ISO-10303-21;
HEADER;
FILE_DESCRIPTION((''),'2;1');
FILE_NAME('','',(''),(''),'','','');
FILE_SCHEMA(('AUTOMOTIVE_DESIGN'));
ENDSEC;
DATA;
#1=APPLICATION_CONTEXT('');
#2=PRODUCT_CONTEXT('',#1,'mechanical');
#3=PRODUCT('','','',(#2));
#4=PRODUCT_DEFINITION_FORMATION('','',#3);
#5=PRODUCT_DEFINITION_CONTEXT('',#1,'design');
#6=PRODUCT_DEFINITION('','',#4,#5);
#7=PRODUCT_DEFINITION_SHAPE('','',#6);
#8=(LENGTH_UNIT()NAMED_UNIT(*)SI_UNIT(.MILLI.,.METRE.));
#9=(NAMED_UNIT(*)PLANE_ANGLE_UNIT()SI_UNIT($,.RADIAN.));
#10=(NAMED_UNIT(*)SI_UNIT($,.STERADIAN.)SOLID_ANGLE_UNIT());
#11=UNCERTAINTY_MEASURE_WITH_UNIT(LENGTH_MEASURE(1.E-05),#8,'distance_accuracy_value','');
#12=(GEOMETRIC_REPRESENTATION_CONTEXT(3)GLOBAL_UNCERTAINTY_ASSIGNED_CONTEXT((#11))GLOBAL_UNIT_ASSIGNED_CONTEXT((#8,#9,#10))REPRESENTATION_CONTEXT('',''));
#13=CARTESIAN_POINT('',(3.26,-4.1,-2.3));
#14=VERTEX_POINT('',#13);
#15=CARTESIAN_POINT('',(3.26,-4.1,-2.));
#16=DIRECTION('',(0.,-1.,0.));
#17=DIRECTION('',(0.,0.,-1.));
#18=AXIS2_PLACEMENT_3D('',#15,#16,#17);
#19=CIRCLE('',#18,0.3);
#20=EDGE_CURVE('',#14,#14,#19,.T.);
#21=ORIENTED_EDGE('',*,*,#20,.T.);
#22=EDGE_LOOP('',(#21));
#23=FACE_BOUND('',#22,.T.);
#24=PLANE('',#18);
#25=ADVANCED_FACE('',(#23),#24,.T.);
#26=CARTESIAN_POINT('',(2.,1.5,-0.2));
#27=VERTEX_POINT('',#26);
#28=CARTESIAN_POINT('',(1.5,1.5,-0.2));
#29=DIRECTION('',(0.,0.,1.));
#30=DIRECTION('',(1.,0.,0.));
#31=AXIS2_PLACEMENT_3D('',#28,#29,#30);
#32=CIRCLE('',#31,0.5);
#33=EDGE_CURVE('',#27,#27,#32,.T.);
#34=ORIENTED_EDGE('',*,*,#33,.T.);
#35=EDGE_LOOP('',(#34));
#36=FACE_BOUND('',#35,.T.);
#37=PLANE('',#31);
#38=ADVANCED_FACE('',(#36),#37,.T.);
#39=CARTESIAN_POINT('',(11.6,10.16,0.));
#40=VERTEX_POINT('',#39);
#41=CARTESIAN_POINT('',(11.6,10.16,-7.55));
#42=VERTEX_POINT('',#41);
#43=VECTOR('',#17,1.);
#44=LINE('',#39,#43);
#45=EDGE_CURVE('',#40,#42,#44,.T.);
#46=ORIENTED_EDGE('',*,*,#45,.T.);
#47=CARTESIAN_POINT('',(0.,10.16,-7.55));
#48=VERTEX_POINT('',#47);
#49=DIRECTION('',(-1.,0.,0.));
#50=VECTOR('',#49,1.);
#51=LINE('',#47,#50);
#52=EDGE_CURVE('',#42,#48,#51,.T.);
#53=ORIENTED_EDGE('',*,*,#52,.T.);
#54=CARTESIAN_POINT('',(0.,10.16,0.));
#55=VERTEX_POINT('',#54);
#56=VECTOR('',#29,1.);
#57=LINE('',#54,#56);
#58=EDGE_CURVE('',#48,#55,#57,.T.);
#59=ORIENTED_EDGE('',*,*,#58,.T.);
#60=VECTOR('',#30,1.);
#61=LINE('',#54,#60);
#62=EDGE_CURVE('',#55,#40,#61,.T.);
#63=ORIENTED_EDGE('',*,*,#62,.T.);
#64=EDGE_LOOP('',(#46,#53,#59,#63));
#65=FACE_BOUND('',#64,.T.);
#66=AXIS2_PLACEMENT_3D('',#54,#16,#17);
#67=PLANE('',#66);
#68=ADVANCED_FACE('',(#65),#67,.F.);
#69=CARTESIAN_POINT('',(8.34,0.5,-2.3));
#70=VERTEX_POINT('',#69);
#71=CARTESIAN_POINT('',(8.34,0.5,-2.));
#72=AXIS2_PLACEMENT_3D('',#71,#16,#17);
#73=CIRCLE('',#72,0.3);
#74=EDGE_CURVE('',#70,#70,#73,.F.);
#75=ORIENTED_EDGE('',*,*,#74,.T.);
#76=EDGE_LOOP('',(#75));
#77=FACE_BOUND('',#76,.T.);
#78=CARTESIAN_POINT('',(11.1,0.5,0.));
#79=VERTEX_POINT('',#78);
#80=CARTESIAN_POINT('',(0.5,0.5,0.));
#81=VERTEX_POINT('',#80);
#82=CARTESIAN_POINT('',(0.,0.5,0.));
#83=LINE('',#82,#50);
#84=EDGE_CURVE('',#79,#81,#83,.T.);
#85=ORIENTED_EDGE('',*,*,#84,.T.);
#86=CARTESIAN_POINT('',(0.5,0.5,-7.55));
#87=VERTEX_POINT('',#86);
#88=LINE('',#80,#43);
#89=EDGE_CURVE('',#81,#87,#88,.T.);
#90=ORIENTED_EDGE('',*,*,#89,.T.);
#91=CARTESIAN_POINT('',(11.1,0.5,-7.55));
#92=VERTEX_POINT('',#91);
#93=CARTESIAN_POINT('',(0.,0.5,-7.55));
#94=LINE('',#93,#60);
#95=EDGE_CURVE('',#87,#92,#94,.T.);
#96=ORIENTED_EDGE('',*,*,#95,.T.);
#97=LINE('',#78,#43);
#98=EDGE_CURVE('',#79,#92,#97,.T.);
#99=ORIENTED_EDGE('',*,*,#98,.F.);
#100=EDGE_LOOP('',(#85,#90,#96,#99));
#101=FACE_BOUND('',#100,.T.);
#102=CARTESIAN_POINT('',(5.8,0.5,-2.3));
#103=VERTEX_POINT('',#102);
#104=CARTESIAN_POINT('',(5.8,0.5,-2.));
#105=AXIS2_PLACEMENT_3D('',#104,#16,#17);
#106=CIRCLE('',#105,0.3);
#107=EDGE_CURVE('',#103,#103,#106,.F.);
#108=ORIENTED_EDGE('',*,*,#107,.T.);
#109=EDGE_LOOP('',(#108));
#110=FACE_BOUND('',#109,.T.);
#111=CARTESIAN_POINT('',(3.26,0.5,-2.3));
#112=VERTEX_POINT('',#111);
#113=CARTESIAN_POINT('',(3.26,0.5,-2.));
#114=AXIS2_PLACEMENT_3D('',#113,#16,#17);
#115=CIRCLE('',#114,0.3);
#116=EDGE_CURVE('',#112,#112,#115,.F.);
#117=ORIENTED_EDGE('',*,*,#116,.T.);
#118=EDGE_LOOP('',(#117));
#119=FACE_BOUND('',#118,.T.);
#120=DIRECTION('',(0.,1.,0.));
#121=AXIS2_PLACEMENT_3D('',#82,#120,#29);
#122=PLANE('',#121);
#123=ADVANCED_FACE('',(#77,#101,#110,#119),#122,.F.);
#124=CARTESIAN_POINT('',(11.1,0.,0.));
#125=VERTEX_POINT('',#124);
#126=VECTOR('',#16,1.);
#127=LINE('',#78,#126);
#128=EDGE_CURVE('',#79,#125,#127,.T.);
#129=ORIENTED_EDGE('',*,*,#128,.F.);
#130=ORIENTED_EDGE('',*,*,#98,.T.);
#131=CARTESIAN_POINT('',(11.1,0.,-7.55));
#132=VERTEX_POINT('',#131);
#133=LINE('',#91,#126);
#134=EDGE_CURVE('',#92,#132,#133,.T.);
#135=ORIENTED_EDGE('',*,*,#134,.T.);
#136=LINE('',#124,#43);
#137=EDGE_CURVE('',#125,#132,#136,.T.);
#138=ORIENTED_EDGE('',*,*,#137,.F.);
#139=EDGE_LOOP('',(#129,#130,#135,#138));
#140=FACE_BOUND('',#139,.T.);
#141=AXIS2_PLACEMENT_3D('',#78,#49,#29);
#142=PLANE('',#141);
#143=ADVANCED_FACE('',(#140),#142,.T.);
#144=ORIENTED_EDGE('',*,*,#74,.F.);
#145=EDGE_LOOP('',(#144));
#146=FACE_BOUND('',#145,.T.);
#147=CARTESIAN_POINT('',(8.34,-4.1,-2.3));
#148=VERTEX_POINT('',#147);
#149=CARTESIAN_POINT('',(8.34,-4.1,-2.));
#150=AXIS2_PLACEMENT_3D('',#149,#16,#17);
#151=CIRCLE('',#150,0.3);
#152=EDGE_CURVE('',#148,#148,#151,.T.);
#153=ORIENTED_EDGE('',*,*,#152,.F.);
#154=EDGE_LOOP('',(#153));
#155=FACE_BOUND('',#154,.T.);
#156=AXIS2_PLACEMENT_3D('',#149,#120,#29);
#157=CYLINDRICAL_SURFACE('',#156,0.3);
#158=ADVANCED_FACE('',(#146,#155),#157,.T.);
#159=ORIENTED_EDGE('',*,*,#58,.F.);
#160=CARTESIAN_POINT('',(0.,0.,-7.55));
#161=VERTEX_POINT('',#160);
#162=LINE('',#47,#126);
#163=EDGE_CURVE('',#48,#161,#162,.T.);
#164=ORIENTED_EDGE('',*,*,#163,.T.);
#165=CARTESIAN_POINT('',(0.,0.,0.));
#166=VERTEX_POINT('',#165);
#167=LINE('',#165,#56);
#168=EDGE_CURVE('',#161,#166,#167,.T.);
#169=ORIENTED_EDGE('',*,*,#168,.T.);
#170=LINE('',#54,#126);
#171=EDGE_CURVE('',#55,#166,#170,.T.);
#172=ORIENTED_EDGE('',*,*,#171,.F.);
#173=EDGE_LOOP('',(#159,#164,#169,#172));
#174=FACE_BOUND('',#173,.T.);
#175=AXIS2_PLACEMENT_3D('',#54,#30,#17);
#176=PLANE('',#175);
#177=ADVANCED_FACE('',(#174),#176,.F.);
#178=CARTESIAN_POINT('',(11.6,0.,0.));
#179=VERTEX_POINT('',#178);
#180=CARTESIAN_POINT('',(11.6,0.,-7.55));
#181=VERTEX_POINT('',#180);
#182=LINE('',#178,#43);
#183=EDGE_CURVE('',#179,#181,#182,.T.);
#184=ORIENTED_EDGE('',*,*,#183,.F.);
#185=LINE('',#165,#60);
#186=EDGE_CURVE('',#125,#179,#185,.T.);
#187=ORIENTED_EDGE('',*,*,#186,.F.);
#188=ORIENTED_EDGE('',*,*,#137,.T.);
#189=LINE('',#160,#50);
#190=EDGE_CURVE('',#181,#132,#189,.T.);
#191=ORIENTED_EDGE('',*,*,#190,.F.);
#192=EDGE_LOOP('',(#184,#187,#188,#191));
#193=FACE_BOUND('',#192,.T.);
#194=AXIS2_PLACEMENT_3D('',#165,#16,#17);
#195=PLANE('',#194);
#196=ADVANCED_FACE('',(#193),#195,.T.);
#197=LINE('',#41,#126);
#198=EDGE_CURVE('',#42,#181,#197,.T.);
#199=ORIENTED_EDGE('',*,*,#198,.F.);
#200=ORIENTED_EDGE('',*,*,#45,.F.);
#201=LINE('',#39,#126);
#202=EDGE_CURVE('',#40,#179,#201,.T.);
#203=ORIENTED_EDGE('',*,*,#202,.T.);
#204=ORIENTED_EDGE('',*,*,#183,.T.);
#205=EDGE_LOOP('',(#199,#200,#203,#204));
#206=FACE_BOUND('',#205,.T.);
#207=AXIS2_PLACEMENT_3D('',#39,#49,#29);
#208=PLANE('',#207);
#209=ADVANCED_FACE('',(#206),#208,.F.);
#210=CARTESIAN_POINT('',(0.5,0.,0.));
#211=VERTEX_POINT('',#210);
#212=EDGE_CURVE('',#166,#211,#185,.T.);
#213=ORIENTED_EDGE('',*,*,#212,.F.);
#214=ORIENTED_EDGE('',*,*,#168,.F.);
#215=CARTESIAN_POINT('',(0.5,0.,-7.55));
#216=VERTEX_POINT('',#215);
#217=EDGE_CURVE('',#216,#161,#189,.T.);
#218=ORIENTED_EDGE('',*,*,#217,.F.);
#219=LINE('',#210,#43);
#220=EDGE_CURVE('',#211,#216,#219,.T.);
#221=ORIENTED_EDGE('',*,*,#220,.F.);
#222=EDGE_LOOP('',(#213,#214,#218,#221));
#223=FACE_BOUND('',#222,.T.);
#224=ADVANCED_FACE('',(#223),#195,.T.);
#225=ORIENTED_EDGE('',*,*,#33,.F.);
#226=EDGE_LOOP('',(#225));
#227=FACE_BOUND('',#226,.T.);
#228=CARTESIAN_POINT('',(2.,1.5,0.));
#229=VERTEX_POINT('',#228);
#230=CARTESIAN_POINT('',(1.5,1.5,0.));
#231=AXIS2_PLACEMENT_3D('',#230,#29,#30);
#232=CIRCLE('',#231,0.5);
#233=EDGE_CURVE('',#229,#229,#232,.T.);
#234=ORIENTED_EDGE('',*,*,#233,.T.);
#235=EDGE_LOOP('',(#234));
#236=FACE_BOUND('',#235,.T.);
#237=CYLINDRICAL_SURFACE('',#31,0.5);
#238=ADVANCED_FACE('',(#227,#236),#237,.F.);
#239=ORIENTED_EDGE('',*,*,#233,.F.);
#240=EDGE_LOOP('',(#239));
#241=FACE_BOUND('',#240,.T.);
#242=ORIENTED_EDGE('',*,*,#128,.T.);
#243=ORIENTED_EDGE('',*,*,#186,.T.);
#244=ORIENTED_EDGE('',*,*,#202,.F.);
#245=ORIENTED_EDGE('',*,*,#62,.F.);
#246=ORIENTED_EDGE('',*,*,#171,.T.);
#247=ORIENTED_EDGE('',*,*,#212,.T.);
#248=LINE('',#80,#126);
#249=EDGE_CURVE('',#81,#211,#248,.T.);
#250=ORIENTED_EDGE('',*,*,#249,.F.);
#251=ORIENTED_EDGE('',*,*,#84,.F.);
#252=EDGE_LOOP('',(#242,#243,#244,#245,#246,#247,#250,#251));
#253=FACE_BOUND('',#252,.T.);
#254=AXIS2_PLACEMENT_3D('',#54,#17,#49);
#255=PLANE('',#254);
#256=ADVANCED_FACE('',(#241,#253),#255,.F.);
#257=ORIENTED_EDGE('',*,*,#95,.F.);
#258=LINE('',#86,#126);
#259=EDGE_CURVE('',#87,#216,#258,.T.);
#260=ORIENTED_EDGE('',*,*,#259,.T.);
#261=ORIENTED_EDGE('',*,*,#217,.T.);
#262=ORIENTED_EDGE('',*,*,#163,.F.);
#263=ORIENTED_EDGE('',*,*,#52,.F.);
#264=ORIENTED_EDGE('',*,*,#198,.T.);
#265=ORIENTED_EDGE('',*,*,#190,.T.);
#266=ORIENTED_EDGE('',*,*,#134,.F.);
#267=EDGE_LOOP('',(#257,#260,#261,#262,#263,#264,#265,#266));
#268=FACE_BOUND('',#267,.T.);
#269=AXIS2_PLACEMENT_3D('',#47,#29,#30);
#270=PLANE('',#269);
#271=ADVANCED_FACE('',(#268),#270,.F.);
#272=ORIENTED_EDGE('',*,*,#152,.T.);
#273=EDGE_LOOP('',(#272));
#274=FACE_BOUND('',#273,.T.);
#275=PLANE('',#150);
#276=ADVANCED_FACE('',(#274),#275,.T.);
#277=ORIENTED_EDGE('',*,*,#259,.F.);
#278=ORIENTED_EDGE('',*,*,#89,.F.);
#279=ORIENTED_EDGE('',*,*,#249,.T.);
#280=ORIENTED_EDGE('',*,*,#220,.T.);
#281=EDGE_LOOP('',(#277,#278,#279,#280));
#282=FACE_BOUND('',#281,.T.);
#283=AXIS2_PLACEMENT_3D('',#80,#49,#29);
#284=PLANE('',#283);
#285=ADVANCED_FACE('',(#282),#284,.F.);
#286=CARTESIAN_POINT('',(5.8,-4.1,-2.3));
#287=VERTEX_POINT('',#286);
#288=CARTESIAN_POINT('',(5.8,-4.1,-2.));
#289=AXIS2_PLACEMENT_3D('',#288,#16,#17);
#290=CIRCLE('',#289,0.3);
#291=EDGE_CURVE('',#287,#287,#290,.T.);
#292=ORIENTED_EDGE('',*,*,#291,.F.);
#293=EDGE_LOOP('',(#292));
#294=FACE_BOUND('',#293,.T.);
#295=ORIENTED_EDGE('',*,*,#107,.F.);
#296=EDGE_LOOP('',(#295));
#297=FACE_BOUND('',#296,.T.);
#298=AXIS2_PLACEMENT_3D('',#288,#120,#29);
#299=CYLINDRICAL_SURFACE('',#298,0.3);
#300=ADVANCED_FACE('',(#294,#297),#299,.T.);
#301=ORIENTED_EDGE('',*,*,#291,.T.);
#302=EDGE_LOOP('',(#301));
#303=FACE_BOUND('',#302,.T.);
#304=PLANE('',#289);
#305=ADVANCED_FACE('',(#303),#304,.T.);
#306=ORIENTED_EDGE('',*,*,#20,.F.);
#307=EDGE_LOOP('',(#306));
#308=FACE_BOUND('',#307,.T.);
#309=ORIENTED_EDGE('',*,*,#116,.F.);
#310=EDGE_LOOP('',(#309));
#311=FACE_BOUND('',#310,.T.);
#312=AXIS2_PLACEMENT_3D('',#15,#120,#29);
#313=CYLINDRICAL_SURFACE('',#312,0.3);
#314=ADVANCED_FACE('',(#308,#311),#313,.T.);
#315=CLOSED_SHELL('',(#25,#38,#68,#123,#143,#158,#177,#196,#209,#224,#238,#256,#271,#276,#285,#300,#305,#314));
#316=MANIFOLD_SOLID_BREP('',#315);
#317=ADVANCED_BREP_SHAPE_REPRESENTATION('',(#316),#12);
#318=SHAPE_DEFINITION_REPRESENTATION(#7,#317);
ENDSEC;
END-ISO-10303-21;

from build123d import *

# Parameters (mm, degrees)
SKETCH1_W                   = 11.6
SKETCH1_H                   = 7.55
BOSS_EXTRUDE1_DEPTH         = 10.16
SKETCH2_R                   = 0.5
CUT_EXTRUDE1_DEPTH          = 0.2
SKETCH3_R                   = 0.3
BOSS_EXTRUDE3_DEPTH         = 4.1
CUT_EXTRUDE_THIN1_START     = -0.5
CUT_EXTRUDE_THIN1_OUTLINE_W = 10.6
CUT_EXTRUDE_THIN1_OUTLINE_H = 7.55
CUT_EXTRUDE_THIN1_OUTLINE_R = 0.3
CUT_EXTRUDE_THIN1_DEPTH     = 0.5


# Read off the part's stored shape, not the designer's step: Cut-Extrude-Thin1
with BuildPart() as part:
    # Sketch1 → Boss-Extrude1 (new body)
    with BuildSketch(Plane(origin=(0, 0, 0), x_dir=(1, 0, 0), z_dir=(0, 1, 0))):
        with Locations((5.8, 3.775)):
            Rectangle(SKETCH1_W, SKETCH1_H)
    extrude(amount=BOSS_EXTRUDE1_DEPTH)

    # Sketch2 → Cut-Extrude1 (cut)
    with BuildSketch(Plane.XY):
        with Locations((1.5, 1.5)):
            Circle(SKETCH2_R)
    extrude(amount=-CUT_EXTRUDE1_DEPTH, mode=Mode.SUBTRACT)

    # Sketch3 → Boss-Extrude3 (add)
    with BuildSketch(Plane.XZ):
        with Locations(Location((5.8, -2, 0), (0, 0, 270))):
            Circle(SKETCH3_R)
        with Locations(Location((8.34, -2, 0), (0, 0, 270))):
            Circle(SKETCH3_R)
        with Locations(Location((3.26, -2, 0), (0, 0, 270))):
            Circle(SKETCH3_R)
    extrude(amount=BOSS_EXTRUDE3_DEPTH)

    # Cut-Extrude-Thin1 outline → Cut-Extrude-Thin1 (cut)
    with BuildSketch(Plane.XZ.offset(CUT_EXTRUDE_THIN1_START)):
        with Locations((5.8, -3.775)):
            Rectangle(CUT_EXTRUDE_THIN1_OUTLINE_W, CUT_EXTRUDE_THIN1_OUTLINE_H)
        with Locations((3.26, -2)):
            Circle(CUT_EXTRUDE_THIN1_OUTLINE_R, mode=Mode.SUBTRACT)
        with Locations((5.8, -2)):
            Circle(CUT_EXTRUDE_THIN1_OUTLINE_R, mode=Mode.SUBTRACT)
        with Locations((8.34, -2)):
            Circle(CUT_EXTRUDE_THIN1_OUTLINE_R, mode=Mode.SUBTRACT)
    extrude(amount=CUT_EXTRUDE_THIN1_DEPTH, mode=Mode.SUBTRACT)


solid = part.part
